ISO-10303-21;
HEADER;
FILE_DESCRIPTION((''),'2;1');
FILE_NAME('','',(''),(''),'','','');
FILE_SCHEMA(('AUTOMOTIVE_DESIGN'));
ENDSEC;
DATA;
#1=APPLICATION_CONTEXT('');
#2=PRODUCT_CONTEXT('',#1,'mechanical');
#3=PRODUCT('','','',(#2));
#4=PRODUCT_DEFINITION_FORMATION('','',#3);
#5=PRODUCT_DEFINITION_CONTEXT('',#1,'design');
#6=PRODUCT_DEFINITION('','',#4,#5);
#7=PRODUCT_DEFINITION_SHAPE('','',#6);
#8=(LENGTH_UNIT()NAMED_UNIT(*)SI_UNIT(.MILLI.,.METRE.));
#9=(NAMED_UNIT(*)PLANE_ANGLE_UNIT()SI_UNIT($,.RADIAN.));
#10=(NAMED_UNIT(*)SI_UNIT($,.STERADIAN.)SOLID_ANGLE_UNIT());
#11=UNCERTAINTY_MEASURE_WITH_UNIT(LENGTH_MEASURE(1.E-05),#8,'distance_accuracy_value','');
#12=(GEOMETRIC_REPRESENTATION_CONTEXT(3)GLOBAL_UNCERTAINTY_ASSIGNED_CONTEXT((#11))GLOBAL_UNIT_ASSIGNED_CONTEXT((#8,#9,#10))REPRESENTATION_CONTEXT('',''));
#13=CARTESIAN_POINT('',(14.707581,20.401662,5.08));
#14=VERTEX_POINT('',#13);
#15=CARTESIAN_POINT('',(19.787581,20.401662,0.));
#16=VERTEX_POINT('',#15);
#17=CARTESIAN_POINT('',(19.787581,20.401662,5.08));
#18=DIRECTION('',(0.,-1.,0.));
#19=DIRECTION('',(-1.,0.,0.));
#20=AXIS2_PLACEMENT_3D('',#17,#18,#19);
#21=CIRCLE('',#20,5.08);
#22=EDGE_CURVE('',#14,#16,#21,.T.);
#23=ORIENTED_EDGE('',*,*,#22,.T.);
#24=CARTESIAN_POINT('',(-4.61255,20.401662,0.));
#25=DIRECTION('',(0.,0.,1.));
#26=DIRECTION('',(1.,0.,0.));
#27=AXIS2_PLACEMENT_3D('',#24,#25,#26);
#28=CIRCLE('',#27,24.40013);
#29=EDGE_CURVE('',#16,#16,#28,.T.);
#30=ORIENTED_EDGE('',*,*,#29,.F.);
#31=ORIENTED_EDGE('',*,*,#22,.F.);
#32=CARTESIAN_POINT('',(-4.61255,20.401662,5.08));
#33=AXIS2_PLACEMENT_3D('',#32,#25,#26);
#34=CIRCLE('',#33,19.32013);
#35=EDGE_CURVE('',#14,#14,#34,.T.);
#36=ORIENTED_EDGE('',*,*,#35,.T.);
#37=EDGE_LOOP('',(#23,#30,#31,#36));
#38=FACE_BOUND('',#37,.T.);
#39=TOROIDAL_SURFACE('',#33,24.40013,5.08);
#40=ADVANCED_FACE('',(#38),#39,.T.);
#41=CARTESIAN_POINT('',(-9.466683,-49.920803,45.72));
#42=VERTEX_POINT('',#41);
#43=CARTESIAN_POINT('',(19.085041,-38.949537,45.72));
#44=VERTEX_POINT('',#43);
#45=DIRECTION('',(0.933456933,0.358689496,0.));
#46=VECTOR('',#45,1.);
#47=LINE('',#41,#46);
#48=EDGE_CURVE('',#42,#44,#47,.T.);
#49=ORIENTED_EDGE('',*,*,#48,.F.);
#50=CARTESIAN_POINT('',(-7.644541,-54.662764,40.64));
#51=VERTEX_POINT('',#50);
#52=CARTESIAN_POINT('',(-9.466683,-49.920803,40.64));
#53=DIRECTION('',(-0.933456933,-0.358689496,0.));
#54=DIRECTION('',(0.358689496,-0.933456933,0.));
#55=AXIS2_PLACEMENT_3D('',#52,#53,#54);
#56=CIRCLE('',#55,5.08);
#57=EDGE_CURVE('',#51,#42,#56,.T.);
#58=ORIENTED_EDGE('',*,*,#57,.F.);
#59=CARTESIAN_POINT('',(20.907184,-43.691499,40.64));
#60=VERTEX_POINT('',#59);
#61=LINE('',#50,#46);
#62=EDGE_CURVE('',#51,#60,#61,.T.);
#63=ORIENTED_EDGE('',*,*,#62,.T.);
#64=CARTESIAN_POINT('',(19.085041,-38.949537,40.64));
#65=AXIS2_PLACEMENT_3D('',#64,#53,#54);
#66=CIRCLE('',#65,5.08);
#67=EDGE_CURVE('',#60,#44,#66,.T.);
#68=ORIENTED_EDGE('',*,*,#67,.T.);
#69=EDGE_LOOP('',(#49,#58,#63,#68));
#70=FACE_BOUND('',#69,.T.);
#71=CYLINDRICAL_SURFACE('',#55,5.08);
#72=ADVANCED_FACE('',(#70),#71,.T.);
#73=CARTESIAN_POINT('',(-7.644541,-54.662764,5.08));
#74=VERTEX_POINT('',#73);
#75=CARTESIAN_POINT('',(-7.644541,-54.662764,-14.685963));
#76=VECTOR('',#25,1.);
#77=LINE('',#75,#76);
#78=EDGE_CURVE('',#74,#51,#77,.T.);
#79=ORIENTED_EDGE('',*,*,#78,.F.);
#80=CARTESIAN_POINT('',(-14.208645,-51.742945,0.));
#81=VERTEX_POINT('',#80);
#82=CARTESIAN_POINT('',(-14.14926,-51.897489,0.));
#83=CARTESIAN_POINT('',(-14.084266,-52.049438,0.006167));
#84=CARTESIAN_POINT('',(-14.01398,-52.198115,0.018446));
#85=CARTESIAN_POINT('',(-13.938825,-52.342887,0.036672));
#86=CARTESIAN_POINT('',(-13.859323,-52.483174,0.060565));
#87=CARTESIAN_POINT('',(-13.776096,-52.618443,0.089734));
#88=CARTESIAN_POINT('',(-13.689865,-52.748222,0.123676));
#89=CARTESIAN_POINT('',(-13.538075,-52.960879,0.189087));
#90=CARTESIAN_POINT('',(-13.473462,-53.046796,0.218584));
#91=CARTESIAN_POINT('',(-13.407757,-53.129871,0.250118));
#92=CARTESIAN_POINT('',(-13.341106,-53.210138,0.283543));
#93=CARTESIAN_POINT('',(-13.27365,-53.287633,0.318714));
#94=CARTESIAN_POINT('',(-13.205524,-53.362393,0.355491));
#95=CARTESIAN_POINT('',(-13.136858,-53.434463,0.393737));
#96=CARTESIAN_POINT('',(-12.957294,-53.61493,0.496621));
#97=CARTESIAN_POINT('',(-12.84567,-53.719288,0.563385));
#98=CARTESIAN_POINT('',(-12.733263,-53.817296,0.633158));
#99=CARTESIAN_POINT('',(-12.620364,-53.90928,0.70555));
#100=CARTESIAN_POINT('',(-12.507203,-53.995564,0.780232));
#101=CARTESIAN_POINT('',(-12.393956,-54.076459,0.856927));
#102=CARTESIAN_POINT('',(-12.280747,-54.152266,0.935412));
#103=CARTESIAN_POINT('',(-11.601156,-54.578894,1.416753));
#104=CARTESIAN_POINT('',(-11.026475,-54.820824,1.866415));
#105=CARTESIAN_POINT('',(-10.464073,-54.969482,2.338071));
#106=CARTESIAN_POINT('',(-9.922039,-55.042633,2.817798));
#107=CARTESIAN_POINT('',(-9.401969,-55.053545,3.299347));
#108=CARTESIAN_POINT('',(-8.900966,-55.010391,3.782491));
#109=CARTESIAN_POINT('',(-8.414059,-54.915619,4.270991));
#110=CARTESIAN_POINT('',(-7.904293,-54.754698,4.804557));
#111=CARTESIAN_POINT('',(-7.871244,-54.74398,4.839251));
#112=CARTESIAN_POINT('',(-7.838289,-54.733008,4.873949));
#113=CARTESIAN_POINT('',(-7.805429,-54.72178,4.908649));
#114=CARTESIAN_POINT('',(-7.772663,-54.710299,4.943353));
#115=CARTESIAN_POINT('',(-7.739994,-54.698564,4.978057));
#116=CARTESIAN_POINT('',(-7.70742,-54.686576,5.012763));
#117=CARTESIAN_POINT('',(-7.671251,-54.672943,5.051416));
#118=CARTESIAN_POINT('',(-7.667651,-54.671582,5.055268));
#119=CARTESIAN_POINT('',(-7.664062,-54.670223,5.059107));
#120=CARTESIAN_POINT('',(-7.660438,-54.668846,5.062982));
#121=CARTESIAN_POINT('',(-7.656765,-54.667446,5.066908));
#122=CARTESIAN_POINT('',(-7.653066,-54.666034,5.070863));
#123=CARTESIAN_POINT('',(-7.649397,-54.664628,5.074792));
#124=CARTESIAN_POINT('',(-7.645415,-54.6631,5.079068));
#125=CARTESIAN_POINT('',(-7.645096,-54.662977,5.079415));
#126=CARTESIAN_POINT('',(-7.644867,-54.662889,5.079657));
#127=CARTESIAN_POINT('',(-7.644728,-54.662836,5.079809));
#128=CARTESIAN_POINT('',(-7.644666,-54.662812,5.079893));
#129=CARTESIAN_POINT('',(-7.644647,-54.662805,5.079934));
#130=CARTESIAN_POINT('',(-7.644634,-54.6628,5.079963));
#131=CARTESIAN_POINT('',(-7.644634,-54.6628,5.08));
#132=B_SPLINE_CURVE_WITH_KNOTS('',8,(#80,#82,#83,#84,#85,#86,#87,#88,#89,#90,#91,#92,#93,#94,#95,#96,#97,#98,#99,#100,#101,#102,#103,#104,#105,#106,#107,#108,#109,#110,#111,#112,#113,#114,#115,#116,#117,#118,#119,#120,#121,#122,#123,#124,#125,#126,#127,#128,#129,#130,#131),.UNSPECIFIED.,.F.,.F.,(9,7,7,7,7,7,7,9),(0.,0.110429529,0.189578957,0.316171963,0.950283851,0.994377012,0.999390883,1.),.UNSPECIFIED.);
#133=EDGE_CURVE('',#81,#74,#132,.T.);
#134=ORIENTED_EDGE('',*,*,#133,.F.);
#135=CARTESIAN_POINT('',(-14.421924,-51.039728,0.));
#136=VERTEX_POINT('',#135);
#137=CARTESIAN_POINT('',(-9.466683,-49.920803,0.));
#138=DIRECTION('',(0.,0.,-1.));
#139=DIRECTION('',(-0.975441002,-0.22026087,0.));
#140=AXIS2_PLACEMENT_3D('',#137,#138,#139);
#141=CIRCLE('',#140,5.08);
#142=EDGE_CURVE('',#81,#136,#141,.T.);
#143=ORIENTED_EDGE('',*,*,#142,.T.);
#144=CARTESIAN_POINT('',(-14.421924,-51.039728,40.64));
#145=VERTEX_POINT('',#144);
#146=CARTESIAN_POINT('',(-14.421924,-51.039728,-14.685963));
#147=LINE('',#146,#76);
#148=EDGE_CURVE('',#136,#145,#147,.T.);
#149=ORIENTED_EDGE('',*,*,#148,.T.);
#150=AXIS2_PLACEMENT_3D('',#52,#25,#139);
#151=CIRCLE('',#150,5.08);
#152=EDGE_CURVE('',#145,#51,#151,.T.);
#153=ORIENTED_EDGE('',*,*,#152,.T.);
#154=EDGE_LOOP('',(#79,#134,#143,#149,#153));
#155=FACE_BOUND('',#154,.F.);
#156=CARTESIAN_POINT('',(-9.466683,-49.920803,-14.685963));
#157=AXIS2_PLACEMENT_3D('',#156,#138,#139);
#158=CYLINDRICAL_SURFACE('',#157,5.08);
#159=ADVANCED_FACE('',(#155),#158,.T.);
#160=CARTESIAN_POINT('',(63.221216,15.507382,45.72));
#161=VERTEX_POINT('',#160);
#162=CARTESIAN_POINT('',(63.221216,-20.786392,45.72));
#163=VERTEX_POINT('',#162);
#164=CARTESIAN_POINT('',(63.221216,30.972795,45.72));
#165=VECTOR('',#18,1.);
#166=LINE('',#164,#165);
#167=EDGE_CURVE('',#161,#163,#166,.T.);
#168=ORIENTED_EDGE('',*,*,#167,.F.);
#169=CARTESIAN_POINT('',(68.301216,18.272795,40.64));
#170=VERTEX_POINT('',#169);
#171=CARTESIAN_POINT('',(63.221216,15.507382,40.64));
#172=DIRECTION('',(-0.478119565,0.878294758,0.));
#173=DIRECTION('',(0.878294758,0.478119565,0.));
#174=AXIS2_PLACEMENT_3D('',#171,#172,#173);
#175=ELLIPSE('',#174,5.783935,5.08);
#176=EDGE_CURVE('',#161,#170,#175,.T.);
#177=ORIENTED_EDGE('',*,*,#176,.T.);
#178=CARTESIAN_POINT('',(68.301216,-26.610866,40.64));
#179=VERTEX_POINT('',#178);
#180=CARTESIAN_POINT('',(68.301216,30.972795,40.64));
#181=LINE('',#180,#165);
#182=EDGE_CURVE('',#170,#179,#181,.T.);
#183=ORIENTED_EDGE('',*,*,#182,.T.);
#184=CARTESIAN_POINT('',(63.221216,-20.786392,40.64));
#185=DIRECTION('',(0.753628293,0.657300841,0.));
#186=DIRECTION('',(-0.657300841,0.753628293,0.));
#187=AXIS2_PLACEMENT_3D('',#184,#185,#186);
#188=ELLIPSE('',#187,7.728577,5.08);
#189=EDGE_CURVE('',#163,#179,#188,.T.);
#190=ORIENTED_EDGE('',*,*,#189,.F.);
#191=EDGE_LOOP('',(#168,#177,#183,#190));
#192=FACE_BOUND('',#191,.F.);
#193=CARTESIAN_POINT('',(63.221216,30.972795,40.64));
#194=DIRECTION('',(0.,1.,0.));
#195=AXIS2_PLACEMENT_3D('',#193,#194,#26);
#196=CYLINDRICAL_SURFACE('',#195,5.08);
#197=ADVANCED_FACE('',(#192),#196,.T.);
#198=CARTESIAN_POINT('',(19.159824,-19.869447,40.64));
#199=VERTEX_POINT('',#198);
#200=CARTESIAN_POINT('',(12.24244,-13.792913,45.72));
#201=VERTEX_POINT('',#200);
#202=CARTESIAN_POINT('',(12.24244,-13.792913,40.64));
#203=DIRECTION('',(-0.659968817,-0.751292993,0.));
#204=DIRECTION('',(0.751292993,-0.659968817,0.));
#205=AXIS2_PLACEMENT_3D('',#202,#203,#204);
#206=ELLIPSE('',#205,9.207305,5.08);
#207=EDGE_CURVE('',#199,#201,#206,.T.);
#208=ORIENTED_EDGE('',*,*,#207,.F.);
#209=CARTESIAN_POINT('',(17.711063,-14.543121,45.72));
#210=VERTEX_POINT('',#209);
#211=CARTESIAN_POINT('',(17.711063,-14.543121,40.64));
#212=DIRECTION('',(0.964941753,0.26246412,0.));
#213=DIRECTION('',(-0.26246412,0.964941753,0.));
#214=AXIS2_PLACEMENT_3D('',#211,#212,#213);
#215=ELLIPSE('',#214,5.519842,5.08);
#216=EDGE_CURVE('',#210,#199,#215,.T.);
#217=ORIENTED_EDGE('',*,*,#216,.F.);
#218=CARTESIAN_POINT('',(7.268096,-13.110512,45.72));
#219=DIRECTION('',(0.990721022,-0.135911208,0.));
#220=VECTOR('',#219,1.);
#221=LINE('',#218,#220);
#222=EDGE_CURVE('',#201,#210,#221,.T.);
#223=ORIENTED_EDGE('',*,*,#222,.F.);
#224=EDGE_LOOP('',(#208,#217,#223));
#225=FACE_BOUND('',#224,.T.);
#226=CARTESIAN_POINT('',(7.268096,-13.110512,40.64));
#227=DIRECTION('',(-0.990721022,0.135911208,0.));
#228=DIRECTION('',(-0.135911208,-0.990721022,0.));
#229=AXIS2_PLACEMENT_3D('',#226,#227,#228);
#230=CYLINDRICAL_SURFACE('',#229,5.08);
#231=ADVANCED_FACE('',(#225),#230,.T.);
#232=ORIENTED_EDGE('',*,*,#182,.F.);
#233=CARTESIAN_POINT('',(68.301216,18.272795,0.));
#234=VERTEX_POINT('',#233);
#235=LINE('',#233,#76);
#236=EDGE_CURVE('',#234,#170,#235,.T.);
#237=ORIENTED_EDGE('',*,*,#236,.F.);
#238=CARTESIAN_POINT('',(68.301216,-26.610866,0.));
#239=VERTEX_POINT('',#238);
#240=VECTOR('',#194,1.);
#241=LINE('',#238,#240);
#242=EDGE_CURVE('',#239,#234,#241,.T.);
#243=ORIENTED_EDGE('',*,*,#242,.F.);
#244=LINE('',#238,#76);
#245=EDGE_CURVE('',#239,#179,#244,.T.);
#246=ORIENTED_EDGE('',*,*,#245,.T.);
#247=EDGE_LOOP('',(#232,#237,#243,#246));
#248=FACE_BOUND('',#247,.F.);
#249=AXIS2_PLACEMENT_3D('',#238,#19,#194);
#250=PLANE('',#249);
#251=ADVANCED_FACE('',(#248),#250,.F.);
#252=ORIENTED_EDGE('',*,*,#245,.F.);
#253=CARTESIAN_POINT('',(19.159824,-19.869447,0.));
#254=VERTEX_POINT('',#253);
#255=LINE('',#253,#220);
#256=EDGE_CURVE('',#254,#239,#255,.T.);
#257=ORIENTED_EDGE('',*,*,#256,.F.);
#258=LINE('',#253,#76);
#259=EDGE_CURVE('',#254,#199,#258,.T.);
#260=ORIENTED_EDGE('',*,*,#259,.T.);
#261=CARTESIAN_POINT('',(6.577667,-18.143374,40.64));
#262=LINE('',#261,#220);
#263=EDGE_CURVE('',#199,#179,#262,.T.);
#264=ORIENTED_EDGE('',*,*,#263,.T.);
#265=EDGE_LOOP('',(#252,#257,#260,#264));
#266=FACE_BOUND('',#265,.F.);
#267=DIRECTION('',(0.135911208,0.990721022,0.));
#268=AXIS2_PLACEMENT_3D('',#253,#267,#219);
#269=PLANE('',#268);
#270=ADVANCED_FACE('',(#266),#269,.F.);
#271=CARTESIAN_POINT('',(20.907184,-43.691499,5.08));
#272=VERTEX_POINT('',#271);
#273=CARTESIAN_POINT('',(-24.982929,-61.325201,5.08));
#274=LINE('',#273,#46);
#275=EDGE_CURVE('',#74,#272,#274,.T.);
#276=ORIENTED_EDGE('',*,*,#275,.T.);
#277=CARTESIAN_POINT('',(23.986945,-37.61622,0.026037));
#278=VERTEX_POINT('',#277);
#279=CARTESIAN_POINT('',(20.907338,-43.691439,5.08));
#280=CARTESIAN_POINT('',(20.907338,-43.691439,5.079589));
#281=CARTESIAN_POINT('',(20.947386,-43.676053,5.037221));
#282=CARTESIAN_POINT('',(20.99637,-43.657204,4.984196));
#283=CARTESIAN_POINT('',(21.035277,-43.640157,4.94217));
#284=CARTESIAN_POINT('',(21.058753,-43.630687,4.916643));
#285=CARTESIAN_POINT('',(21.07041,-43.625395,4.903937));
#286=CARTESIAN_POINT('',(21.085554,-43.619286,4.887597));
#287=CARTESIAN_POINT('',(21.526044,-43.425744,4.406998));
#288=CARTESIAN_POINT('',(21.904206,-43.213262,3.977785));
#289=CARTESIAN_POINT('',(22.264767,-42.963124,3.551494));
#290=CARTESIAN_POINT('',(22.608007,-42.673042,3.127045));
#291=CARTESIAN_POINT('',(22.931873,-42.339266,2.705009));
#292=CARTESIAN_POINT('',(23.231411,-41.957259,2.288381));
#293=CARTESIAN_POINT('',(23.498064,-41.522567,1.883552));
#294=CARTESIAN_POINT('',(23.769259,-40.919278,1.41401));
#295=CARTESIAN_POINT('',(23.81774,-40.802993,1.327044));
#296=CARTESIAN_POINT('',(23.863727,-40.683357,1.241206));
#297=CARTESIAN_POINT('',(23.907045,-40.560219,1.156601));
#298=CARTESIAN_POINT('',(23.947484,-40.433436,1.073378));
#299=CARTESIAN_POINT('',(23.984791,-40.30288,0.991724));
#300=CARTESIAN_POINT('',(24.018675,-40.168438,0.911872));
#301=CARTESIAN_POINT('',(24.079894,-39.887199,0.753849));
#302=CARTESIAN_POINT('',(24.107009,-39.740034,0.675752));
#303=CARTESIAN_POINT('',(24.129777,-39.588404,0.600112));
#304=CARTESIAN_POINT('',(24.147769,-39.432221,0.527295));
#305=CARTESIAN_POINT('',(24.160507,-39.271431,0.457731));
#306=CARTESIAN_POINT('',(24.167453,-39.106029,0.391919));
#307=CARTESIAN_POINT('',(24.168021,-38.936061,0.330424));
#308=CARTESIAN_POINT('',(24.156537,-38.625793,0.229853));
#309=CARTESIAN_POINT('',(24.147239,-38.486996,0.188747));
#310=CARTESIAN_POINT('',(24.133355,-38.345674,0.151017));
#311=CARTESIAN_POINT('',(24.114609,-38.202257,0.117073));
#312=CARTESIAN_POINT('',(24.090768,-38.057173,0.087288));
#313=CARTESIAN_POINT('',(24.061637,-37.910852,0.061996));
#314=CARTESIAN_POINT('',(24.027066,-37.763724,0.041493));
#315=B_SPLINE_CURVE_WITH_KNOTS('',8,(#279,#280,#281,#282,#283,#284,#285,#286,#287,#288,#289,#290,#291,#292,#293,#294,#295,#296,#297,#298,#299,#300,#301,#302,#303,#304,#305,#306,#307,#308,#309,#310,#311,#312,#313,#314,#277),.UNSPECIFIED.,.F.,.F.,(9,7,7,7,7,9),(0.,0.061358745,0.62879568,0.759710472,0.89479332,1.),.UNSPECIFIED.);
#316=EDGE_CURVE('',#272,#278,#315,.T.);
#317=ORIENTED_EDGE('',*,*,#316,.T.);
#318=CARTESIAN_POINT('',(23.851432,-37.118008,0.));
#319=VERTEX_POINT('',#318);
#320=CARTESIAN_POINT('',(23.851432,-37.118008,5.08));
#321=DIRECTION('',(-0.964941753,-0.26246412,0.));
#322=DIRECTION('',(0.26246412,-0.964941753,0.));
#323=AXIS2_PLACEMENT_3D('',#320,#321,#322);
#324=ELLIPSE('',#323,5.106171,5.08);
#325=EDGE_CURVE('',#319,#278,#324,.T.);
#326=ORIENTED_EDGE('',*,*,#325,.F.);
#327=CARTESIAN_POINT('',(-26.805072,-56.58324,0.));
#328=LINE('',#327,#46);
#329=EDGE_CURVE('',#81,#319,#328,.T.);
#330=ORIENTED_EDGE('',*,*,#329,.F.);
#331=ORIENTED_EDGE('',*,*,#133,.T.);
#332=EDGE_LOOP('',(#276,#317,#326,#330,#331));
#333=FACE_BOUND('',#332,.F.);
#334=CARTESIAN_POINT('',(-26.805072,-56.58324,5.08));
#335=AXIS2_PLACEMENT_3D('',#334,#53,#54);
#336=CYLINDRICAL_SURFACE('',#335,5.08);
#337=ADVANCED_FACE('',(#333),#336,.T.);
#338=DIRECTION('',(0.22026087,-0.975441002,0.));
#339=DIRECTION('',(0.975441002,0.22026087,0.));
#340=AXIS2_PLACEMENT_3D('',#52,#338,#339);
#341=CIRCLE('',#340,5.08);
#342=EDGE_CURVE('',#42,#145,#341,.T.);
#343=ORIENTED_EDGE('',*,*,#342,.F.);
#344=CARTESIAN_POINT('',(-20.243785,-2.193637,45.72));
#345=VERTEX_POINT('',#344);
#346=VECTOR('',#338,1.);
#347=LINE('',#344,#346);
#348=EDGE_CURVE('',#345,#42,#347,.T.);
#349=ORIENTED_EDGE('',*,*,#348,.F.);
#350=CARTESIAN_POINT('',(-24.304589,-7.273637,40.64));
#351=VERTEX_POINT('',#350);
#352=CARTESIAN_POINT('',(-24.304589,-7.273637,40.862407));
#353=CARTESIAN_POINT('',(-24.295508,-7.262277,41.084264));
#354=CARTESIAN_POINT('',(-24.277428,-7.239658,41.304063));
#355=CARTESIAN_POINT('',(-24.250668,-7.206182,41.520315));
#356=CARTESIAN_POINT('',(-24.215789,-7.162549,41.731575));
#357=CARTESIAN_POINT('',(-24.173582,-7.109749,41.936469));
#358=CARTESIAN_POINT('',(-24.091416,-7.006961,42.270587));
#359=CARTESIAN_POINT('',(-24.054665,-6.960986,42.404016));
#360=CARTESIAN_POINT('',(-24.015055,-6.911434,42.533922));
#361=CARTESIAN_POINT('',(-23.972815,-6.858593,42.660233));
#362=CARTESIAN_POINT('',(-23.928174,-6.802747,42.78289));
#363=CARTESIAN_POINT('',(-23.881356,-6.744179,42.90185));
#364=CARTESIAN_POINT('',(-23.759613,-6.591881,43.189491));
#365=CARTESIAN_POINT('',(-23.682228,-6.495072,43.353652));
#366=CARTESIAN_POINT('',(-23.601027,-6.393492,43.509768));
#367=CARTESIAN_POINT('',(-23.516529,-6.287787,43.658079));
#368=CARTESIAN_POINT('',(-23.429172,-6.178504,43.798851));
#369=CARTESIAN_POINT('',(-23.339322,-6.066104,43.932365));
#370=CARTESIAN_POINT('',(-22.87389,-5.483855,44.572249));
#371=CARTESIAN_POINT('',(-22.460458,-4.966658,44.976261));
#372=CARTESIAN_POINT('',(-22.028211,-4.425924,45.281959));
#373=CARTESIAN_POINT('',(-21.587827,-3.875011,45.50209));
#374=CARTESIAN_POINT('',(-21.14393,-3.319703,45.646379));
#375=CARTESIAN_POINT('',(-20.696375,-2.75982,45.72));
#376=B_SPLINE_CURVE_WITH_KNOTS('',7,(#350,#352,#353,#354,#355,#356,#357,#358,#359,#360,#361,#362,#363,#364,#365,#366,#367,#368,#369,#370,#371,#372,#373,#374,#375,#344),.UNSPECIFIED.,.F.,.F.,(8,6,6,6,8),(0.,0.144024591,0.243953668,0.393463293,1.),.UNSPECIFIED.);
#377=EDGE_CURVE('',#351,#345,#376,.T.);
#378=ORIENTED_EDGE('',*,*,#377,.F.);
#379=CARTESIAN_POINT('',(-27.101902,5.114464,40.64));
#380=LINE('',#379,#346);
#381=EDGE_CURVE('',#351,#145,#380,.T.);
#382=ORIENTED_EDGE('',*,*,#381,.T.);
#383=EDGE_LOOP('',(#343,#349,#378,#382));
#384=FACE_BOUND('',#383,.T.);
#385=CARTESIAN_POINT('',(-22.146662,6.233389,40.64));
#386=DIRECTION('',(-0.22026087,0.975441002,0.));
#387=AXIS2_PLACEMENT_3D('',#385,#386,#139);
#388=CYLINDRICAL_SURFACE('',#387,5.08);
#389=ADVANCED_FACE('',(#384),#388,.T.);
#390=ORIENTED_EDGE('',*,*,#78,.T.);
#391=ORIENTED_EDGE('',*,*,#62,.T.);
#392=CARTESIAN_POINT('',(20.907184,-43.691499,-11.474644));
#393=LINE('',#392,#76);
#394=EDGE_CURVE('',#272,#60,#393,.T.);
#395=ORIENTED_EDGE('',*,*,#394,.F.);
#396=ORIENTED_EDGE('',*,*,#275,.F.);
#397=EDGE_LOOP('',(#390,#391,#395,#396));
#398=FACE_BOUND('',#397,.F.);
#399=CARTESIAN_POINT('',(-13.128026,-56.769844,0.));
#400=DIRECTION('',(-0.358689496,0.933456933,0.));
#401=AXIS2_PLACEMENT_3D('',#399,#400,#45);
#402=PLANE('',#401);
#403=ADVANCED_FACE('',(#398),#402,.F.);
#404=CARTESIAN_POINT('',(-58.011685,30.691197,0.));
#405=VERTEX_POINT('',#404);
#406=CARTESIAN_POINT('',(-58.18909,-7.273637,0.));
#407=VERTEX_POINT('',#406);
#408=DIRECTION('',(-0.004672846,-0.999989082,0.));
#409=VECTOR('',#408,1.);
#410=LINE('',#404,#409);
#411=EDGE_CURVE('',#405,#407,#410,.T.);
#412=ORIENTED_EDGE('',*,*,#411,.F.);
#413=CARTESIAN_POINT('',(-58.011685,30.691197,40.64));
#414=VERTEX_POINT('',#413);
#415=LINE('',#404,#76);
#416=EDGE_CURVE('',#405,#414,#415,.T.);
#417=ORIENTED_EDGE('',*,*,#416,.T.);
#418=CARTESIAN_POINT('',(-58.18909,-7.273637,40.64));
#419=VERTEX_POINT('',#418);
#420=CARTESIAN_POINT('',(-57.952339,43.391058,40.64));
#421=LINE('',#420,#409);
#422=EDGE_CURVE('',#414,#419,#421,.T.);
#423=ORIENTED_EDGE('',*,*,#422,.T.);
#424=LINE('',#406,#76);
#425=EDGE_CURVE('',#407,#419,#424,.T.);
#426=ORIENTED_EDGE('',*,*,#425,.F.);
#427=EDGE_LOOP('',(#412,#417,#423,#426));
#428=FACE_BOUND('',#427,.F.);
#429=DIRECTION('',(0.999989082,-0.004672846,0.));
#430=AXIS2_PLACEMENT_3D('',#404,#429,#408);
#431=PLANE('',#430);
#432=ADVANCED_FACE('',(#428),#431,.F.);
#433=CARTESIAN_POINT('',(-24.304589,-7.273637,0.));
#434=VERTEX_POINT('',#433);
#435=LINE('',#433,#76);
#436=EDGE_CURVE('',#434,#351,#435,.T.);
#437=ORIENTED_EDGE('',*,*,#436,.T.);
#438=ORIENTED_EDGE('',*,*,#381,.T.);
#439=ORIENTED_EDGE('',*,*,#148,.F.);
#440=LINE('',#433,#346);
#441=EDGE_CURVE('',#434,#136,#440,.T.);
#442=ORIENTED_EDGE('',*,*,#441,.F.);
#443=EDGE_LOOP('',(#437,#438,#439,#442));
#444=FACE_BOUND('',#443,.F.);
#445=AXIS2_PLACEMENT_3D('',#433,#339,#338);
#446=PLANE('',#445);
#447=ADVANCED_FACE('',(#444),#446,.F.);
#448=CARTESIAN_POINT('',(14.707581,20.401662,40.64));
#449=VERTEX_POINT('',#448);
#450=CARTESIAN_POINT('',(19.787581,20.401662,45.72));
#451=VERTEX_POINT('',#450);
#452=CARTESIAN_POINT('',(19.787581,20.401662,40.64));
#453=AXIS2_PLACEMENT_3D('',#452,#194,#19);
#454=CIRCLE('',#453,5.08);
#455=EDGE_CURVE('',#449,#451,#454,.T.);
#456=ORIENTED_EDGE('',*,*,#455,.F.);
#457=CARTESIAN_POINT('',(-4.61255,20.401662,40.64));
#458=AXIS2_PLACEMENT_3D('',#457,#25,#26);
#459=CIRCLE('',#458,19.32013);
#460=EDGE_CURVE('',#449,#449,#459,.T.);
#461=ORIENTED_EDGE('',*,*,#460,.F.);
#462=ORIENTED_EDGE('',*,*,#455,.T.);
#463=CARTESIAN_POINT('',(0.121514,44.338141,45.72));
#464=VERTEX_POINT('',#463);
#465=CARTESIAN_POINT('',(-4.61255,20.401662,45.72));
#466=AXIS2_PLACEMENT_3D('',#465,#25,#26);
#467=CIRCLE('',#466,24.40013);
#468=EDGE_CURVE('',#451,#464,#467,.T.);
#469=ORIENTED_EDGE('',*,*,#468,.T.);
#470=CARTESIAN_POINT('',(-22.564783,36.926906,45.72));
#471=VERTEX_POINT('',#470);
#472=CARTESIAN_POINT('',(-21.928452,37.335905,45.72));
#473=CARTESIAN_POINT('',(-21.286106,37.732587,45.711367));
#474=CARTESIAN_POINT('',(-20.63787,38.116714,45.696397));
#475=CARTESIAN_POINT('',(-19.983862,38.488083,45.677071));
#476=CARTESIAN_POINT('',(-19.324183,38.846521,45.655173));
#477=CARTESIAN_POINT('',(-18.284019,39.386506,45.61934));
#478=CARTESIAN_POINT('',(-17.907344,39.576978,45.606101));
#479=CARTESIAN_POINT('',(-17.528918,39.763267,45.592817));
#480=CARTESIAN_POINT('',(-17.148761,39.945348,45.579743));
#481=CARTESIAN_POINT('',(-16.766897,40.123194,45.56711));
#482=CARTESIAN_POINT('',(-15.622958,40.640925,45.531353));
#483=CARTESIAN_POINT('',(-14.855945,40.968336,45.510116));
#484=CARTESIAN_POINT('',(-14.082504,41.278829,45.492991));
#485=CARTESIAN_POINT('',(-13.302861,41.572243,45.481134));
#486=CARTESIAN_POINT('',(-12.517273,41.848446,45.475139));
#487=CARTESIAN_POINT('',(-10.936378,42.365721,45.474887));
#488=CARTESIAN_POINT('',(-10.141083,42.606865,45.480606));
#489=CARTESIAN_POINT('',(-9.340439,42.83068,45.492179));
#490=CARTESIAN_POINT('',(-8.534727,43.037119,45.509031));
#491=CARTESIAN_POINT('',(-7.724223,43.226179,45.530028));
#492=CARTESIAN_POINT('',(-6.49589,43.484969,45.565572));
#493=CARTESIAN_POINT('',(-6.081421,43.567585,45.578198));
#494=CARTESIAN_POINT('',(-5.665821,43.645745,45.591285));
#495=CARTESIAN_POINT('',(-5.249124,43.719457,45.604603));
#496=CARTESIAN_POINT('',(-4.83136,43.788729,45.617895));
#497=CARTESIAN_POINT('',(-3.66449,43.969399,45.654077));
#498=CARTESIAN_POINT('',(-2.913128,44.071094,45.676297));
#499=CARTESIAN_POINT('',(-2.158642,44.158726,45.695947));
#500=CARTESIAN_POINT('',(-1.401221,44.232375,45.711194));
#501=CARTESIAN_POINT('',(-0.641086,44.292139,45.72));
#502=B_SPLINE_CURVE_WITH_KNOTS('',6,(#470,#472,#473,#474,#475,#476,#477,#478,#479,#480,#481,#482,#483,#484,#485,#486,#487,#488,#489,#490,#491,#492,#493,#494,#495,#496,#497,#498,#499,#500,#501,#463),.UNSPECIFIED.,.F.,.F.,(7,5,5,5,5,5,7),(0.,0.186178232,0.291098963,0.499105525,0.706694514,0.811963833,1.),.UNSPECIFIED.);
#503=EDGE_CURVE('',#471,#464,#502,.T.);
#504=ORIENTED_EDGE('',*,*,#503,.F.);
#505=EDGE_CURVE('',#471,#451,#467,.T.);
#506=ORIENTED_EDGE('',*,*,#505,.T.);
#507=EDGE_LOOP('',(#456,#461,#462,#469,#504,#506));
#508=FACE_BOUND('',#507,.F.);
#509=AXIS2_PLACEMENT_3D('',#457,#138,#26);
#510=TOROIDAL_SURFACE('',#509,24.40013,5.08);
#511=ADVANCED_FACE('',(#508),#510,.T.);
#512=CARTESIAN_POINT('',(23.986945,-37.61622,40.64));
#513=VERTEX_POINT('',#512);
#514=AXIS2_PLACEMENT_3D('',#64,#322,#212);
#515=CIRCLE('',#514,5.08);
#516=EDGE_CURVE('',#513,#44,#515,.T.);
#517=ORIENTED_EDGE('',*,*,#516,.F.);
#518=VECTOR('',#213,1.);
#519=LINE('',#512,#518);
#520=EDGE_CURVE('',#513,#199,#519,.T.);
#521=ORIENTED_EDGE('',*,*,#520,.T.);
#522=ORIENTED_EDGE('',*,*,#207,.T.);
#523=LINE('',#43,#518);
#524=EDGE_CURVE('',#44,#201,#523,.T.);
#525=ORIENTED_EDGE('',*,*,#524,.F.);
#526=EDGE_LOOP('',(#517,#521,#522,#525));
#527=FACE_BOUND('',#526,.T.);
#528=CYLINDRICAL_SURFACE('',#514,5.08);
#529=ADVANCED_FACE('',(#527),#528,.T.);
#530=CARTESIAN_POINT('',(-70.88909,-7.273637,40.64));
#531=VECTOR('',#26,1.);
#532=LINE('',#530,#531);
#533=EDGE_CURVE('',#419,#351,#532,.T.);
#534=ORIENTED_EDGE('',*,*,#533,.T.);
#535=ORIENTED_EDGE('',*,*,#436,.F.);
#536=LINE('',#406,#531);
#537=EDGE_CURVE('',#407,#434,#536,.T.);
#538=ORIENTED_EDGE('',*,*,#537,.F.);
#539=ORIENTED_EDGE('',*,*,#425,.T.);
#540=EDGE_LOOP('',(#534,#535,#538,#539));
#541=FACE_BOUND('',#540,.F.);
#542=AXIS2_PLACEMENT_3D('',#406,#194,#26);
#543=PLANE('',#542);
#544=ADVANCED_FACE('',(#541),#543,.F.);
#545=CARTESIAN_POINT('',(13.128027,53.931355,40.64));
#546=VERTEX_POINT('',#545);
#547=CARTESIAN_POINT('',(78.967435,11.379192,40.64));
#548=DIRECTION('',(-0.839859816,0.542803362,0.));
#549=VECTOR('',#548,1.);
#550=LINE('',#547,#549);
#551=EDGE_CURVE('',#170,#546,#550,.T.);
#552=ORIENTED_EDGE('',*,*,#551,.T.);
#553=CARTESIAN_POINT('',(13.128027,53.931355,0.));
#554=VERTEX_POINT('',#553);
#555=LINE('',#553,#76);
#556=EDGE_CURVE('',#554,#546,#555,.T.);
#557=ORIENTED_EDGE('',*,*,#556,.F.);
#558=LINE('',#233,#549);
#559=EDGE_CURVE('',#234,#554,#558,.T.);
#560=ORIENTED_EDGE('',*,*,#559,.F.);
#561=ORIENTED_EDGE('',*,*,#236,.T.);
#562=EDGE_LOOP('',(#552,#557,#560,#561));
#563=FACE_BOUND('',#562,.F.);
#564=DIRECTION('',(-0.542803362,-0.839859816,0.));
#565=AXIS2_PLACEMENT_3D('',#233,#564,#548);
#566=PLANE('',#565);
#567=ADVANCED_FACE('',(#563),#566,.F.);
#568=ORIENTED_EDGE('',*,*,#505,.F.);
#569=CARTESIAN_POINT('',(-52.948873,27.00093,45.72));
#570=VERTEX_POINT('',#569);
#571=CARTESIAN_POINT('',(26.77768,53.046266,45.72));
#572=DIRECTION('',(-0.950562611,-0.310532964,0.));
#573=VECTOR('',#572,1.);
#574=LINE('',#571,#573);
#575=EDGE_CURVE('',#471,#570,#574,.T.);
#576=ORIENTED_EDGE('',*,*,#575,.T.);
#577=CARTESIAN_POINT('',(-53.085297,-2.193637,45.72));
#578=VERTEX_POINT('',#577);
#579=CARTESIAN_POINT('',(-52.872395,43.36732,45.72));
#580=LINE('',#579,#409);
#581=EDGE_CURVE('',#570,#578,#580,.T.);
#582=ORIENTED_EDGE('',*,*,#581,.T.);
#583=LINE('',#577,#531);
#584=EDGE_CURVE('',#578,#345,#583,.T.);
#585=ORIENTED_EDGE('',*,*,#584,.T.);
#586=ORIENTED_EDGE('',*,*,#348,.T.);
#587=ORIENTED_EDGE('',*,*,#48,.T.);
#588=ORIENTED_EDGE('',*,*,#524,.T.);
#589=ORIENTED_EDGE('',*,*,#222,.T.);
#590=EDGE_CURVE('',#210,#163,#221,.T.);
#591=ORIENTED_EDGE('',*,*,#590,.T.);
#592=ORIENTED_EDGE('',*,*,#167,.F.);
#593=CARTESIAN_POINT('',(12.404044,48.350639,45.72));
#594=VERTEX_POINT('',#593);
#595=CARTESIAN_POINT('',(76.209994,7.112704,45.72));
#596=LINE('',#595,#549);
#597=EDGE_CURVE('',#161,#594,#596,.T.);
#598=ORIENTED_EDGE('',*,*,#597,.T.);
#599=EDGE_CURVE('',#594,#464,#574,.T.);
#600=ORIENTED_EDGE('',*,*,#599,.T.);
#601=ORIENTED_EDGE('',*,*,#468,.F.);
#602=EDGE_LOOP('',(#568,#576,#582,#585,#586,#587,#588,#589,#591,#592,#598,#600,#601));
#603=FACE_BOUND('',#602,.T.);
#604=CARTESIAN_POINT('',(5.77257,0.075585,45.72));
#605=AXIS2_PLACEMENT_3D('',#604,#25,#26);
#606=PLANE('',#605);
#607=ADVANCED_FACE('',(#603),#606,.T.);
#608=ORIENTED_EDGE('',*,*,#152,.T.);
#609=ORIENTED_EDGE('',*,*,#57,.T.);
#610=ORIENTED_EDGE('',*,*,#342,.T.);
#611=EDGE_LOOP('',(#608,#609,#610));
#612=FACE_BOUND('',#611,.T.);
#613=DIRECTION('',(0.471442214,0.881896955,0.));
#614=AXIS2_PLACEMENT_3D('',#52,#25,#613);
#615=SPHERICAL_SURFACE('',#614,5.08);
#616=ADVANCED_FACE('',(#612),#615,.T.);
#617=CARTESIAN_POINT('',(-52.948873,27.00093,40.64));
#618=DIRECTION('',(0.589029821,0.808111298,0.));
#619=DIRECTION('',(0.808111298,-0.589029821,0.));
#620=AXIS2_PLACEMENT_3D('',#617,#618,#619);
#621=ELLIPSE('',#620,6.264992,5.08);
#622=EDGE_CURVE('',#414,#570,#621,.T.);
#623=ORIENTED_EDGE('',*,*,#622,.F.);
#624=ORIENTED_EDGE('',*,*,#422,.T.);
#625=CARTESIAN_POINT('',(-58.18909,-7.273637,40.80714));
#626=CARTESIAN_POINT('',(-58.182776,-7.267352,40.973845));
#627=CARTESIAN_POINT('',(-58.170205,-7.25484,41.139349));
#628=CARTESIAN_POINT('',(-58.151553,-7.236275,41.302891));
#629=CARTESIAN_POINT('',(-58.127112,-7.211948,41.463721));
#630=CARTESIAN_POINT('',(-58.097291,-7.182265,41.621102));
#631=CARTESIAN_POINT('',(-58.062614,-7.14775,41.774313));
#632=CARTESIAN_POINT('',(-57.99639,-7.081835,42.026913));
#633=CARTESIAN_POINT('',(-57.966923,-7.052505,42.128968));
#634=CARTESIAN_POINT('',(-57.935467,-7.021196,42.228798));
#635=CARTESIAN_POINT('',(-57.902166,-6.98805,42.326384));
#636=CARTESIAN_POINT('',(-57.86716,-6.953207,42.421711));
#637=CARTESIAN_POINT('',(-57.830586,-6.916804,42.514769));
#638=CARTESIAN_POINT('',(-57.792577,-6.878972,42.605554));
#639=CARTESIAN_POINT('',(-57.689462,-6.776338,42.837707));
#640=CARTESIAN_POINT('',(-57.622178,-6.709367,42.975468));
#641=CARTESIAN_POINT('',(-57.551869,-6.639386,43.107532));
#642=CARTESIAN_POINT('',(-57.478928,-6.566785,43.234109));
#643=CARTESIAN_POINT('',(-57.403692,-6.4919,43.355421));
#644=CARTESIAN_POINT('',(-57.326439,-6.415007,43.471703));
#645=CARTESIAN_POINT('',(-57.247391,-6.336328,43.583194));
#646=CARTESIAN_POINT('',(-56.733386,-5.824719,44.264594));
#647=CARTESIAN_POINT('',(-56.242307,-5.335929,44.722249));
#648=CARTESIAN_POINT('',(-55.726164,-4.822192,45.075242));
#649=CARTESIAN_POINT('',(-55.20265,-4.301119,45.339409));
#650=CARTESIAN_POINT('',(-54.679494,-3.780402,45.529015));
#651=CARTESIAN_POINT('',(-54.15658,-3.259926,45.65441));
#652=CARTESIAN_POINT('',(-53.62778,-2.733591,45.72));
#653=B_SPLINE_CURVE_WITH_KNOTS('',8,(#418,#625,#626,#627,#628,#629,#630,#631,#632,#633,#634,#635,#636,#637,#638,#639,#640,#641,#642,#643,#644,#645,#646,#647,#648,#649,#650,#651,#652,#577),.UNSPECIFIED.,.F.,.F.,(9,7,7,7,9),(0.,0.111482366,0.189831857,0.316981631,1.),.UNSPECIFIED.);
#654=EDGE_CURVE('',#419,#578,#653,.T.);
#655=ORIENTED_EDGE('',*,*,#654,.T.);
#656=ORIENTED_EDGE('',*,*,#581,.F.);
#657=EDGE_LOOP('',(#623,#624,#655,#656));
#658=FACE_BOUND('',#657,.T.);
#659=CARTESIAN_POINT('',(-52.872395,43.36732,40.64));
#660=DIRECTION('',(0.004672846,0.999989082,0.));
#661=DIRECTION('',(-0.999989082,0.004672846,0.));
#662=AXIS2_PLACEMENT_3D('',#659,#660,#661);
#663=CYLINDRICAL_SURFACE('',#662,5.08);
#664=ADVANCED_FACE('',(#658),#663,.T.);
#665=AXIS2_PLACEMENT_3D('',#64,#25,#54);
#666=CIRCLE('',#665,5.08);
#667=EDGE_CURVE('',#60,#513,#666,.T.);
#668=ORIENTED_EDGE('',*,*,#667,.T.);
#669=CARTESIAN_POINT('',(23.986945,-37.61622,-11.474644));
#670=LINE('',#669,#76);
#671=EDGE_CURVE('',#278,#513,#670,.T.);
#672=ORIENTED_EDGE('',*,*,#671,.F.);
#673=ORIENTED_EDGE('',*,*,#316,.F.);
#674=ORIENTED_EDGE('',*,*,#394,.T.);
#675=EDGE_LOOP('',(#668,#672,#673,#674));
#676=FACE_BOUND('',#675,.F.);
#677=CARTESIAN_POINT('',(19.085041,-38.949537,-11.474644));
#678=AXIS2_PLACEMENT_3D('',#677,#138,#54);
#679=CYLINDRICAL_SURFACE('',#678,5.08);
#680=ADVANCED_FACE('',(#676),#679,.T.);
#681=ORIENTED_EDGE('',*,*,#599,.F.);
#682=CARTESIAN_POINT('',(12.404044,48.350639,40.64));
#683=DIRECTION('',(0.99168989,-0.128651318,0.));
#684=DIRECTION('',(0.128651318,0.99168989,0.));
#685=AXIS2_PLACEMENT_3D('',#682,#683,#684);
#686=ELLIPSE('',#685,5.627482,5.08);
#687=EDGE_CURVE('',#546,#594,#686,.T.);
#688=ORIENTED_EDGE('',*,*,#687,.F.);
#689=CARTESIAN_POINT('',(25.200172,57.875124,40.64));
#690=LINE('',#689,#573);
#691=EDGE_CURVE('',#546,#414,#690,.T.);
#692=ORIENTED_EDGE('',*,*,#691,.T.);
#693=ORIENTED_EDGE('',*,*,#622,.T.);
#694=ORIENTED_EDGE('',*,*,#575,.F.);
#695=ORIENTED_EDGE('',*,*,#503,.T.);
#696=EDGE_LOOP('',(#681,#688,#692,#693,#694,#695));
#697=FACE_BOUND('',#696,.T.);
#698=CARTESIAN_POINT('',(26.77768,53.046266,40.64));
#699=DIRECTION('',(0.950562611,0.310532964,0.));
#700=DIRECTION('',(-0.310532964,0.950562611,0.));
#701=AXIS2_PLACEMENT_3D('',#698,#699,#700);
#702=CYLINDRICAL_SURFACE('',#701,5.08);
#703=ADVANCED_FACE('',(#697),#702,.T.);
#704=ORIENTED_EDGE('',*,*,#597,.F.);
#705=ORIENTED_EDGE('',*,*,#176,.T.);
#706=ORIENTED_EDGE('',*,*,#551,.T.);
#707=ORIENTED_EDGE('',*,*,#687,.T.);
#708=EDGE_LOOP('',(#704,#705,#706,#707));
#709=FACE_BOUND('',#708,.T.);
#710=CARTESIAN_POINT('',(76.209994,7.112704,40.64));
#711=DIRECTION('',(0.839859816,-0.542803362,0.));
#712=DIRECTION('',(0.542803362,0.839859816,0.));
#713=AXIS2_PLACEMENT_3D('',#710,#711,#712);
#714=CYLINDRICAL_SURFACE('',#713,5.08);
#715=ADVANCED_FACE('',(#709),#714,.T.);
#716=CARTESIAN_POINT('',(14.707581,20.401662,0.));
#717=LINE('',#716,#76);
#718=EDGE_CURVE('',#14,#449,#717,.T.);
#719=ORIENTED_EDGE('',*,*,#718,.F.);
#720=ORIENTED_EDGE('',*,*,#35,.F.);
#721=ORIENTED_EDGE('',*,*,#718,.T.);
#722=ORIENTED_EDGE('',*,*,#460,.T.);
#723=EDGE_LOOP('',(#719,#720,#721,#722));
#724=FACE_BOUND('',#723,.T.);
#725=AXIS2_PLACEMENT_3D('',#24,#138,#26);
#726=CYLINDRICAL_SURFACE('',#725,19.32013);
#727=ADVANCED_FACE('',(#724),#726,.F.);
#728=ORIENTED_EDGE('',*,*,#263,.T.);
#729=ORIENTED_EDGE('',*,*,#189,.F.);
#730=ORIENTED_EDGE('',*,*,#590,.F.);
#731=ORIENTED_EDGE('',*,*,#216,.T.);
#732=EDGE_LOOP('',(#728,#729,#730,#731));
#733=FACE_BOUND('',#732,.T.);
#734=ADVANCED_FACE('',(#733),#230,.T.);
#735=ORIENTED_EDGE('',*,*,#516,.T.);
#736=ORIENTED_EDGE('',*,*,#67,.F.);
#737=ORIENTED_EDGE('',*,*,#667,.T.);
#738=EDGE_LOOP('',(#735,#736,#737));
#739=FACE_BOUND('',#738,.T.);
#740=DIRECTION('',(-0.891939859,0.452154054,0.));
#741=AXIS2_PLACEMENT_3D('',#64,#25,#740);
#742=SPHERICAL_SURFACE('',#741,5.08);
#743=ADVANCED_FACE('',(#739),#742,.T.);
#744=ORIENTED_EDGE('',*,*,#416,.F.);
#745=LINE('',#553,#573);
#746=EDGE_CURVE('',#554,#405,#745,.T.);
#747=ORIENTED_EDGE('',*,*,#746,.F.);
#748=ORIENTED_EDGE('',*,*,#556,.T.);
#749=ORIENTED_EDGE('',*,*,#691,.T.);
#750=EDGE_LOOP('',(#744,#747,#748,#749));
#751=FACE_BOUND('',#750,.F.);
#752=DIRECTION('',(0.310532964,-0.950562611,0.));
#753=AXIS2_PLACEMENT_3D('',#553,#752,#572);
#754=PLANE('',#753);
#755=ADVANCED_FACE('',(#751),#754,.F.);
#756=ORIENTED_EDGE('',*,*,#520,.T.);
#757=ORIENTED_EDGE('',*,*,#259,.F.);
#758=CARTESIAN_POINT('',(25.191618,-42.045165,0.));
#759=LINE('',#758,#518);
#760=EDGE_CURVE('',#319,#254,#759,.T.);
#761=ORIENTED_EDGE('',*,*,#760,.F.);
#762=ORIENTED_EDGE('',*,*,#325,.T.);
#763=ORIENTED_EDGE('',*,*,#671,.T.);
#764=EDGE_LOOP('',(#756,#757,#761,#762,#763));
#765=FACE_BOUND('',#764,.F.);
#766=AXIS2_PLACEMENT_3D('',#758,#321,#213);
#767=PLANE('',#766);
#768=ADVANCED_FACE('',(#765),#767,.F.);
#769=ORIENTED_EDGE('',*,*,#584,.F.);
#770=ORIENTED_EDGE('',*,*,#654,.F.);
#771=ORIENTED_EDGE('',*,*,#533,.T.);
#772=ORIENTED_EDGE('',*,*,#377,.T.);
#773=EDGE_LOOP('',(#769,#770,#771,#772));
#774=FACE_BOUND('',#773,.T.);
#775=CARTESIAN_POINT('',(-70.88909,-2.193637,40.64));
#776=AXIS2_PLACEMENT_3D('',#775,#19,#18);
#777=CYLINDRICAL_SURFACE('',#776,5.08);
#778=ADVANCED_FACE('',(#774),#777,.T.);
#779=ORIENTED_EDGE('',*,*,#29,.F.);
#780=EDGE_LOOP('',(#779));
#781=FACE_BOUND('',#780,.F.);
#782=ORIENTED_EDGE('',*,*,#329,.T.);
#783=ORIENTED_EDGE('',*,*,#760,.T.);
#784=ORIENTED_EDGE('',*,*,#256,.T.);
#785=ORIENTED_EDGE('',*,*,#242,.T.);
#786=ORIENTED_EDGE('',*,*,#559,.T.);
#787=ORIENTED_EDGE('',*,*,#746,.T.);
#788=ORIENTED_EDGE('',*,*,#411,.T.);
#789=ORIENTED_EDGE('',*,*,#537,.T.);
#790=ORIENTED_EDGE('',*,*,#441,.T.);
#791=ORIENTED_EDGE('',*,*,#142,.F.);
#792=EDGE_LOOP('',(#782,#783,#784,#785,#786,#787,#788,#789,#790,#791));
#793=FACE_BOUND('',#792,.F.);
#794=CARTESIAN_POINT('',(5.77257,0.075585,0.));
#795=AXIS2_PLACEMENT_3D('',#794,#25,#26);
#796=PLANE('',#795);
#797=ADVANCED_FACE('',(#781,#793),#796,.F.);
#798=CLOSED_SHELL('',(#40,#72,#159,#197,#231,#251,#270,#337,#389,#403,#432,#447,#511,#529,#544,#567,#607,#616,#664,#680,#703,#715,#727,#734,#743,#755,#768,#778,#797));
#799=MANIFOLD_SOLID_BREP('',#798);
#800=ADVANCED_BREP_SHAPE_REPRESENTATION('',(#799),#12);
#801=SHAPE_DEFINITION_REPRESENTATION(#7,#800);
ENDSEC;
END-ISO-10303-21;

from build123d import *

# Parameters (mm, degrees)
F0_R         = 19.3201303499
F1_DEPTH     = 45.72
F2_T1_DEPTH  = 55.325963316
F2_T3_DEPTH  = 52.1146440054
F2_T5_DEPTH  = 66.4513256331
F2_T7_DEPTH  = 30.5870827045
F2_T9_DEPTH  = 100.2395855595
F2_T11_DEPTH = 63.3652483976
F2_T13_DEPTH = 70.2836609721
F2_T15_DEPTH = 91.0933305156
F2_T20_DEPTH = 5.08
F2_T26_DEPTH = 5.08
F2_T36_DEPTH = 59.2845010847
F2_T41_DEPTH = 57.568004282
F2_T46_DEPTH = 31.0915483116
F2_T51_DEPTH = 75.0016446771
F2_T57_DEPTH = 59.2845010847
F2_T61_DEPTH = 57.568004282
F2_T68_DEPTH = 31.0915483116
F2_T72_DEPTH = 75.0016446771


# Not quite as in the source:
# - a fillet or chamfer that OpenCascade refuses, or shapes differently, is made with other operations: its cross-section is extruded or revolved along the edge and cut away or added


with BuildPart() as f1:
    # F0 (on Top) → F1 (new body)
    with BuildSketch(Plane.XY):
        Polygon((13.1280273199, 53.9313554764), (-58.0116845667, 30.691197142), (-58.1890903413, -7.2736367583), (-24.3045892566, -7.2736367583), (-13.1280263886, -56.7698441446), (25.1916181296, -42.0451648533), (19.1598236561, -19.8694467545), (68.3012157679, -26.610866189), (68.3012157679, 18.2727947831), align=None)
        with Locations((-4.6125496738, 20.4016622156)):
            Circle(F0_R, mode=Mode.SUBTRACT)
    extrude(amount=F1_DEPTH)

    # F2: fillet of radius 5.08 on 15 edges, made by hand

    # F2_s2 → F2_t1 (cut)
    with BuildSketch(Plane.XY.offset(-14.685963316)):
        with BuildLine():
            ThreePointArc((-14.4219236098, -51.039727833), (-11.8616097658, -54.4008391443), (-7.6445406789, -54.662763834))
            Line((-7.6445406789, -54.662763834), (-13.1280263886, -56.7698441446))
            Line((-13.1280263886, -56.7698441446), (-14.4219236098, -51.039727833))
        make_face()
    extrude(amount=F2_T1_DEPTH, mode=Mode.SUBTRACT)

    # F2_s4 → F2_t3 (cut)
    with BuildSketch(Plane.XY.offset(-11.4746440054)):
        with BuildLine():
            ThreePointArc((20.9071837297, -43.6914985622), (23.6160955732, -41.2464799373), (23.9869451943, -37.6162196147))
            Line((23.9869451943, -37.6162196147), (25.1916181296, -42.0451648533))
            Line((25.1916181296, -42.0451648533), (20.9071837297, -43.6914985622))
        make_face()
    extrude(amount=F2_T3_DEPTH, mode=Mode.SUBTRACT)

    # F2_s6 → F2_t5 (cut)
    with BuildSketch(Plane(origin=(-42.3016489373, -16.2548014713, 0), x_dir=(0, 0, 1), z_dir=(0.9334569329, 0.3586894958, 0))):
        with BuildLine():
            ThreePointArc((5.08, 48.2833194327), (1.4878975516, 46.7954218811), (0, 43.2033194327))
            Line((0, 43.2033194327), (0, 48.2833194327))
            Line((0, 48.2833194327), (5.08, 48.2833194327))
        make_face()
    extrude(amount=F2_T5_DEPTH, mode=Mode.SUBTRACT)

    # F2_s8 → F2_t7 (cut)
    with BuildSketch(Plane(origin=(-24.9632601794, -9.5923645646, 0), x_dir=(0, 0, 1), z_dir=(0.9334569329, 0.3586894958, 0))):
        with BuildLine():
            ThreePointArc((40.64, 48.2833194327), (44.2321024484, 46.7954218811), (45.72, 43.2033194327))
            Line((45.72, 43.2033194327), (45.72, 48.2833194327))
            Line((45.72, 48.2833194327), (40.64, 48.2833194327))
        make_face()
    extrude(amount=F2_T7_DEPTH, mode=Mode.SUBTRACT)

    # F2_s10 → F2_t9 (cut)
    with BuildSketch(Plane(origin=(39.8537401384, 13.0195527431, 0), x_dir=(0, 0, 1), z_dir=(-0.9505626114, -0.3105329641, 0))):
        with BuildLine():
            ThreePointArc((40.64, 47.1884448626), (44.2321024484, 45.700547311), (45.72, 42.1084448626))
            Line((45.72, 42.1084448626), (45.72, 47.1884448626))
            Line((45.72, 47.1884448626), (40.64, 47.1884448626))
        make_face()
    extrude(amount=F2_T9_DEPTH, mode=Mode.SUBTRACT)

    # F2_s12 → F2_t11 (cut)
    with BuildSketch(Plane(origin=(0.2014921201, 43.1193115962, 0), x_dir=(0, 0, 1), z_dir=(-0.0046728464, -0.9999890822, 0))):
        with BuildLine():
            ThreePointArc((40.64, 58.1544664567), (44.2321024484, 56.6665689051), (45.72, 53.0744664567))
            Line((45.72, 53.0744664567), (45.72, 58.1544664567))
            Line((45.72, 58.1544664567), (40.64, 58.1544664567))
        make_face()
    extrude(amount=F2_T11_DEPTH, mode=Mode.SUBTRACT)

    # F2_s14 → F2_t13 (cut)
    with BuildSketch(Plane.XZ.offset(-30.9727947831)):
        with BuildLine():
            ThreePointArc((68.3012157679, 40.64), (66.8133182163, 44.2321024484), (63.2212157679, 45.72))
            Line((63.2212157679, 45.72), (68.3012157679, 45.72))
            Line((68.3012157679, 45.72), (68.3012157679, 40.64))
        make_face()
    extrude(amount=F2_T13_DEPTH, mode=Mode.SUBTRACT)

    # F2_s16 → F2_t15 (cut)
    with BuildSketch(Plane(origin=(50.5132947185, -32.6468604807, 0), x_dir=(0, 0, 1), z_dir=(-0.8398598155, 0.5428033624, 0))):
        with BuildLine():
            ThreePointArc((40.64, 52.4207156327), (44.2321024484, 50.9328180811), (45.72, 47.3407156327))
            Line((45.72, 47.3407156327), (45.72, 52.4207156327))
            Line((45.72, 52.4207156327), (40.64, 52.4207156327))
        make_face()
    extrude(amount=F2_T15_DEPTH, mode=Mode.SUBTRACT)


with BuildPart() as f2_tool18:
    # F2_s19 → F2_t20 (new body)
    with BuildSketch(Plane.XY.offset(40.64)):
        Polygon((-9.4666833174, -49.9208026147), (-14.4219236098, -51.039727833), (-13.1280263886, -56.7698441446), (-7.6445406789, -54.662763834), align=None)
    extrude(amount=F2_T20_DEPTH)

    # F2_s21 → F2_t22 (revolve, cut)
    with BuildSketch(Plane(origin=(-9.4666833174, -49.9208026147, 40.64), x_dir=(0.4714422143, 0.8818969546, 0), z_dir=(0.8818969546, -0.4714422143, 0))):
        with BuildLine():
            ThreePointArc((0, -5.08), (5.08, 0), (0, 5.08))
            Line((0, 5.08), (0, -5.08))
        make_face()
    revolve(axis=Axis((-9.4666833174, -49.9208026147, 40.64), (0, 0, 1)), mode=Mode.SUBTRACT)


with BuildPart() as f1_1:
    add(f1.part)

    # F2_t17: cut F2_tool18
    add(f2_tool18.part, mode=Mode.SUBTRACT)


with BuildPart() as f2_tool24:
    # F2_s25 → F2_t26 (new body)
    with BuildSketch(Plane.XY.offset(40.64)):
        Polygon((19.0850410913, -38.9495373429), (20.9071837297, -43.6914985622), (25.1916181296, -42.0451648533), (23.9869451943, -37.6162196147), align=None)
    extrude(amount=F2_T26_DEPTH)

    # F2_s27 → F2_t28 (revolve, cut)
    with BuildSketch(Plane(origin=(19.0850410913, -38.9495373429, 40.64), x_dir=(-0.8919398586, 0.452154054, 0), z_dir=(0.452154054, 0.8919398586, 0))):
        with BuildLine():
            ThreePointArc((0, -5.08), (5.08, 0), (0, 5.08))
            Line((0, 5.08), (0, -5.08))
        make_face()
    revolve(axis=Axis((19.0850410913, -38.9495373429, 40.64), (0, 0, 1)), mode=Mode.SUBTRACT)


with BuildPart() as f1_2:
    add(f1_1.part)

    # F2_t23: cut F2_tool24
    add(f2_tool24.part, mode=Mode.SUBTRACT)

    # F2_s29 → F2_t30 (revolve, cut)
    with BuildSketch(Plane.XZ.offset(-20.4016622156)):
        with BuildLine():
            ThreePointArc((14.7075806761, 5.08), (16.1954782277, 1.4878975516), (19.7875806761, 0))
            Line((19.7875806761, 0), (14.7075806761, 0))
            Line((14.7075806761, 0), (14.7075806761, 5.08))
        make_face()
    revolve(axis=Axis((-4.6125496738, 20.4016622156, 0), (0, 0, 1)), mode=Mode.SUBTRACT)

    # F2_s31 → F2_t32 (revolve, cut)
    with BuildSketch(Plane.XZ.offset(-20.4016622156)):
        with BuildLine():
            ThreePointArc((14.7075806761, 40.64), (16.1954782277, 44.2321024484), (19.7875806761, 45.72))
            Line((19.7875806761, 45.72), (14.7075806761, 45.72))
            Line((14.7075806761, 45.72), (14.7075806761, 40.64))
        make_face()
    revolve(axis=Axis((-4.6125496738, 20.4016622156, 45.72), (0, 0, 1)), mode=Mode.SUBTRACT)


with BuildPart() as f2_tool34:
    # F2_s35 → F2_t36 (new body)
    with BuildSketch(Plane.YZ.offset(-70.8890903413)):
        with BuildLine():
            ThreePointArc((-7.2736367583, 40.64), (-5.7857392068, 44.2321024484), (-2.1936367583, 45.72))
            Line((-2.1936367583, 45.72), (-7.2736367583, 45.72))
            Line((-7.2736367583, 45.72), (-7.2736367583, 40.64))
        make_face()
    extrude(amount=F2_T36_DEPTH)

    split(bisect_by=Plane(origin=(-24.6882073851, -5.5747564614, 0), x_dir=(0, 0, 1), z_dir=(-0.9754410024, -0.2202608697, 0)), keep=Keep.TOP)


with BuildPart() as f1_3:
    add(f1_2.part)

    # F2_t33: cut F2_tool34
    add(f2_tool34.part, mode=Mode.SUBTRACT)


with BuildPart() as f2_tool39:
    # F2_s40 → F2_t41 (new body)
    with BuildSketch(Plane(origin=(-2.4136949173, 10.6892204341, 0), x_dir=(0, 0, 1), z_dir=(0.2202608697, -0.9754410024, 0))):
        with BuildLine():
            ThreePointArc((40.64, 25.3097904672), (44.2321024484, 23.8218929156), (45.72, 20.2297904672))
            Line((45.72, 20.2297904672), (45.72, 25.3097904672))
            Line((45.72, 25.3097904672), (40.64, 25.3097904672))
        make_face()
    extrude(amount=F2_T41_DEPTH)

    split(bisect_by=Plane.XZ.offset(7.2736367583), keep=Keep.TOP)


with BuildPart() as f1_4:
    add(f1_3.part)

    # F2_t38: cut F2_tool39
    add(f2_tool39.part, mode=Mode.SUBTRACT)


with BuildPart() as f2_tool44:
    # F2_s45 → F2_t46 (new body)
    with BuildSketch(Plane(origin=(11.1791797465, -41.0999313259, 0), x_dir=(0, 0, 1), z_dir=(-0.2624641197, 0.9649417526, 0))):
        with BuildLine():
            ThreePointArc((40.64, 13.2730969655), (44.2321024484, 11.7851994139), (45.72, 8.1930969655))
            Line((45.72, 8.1930969655), (45.72, 13.2730969655))
            Line((45.72, 13.2730969655), (40.64, 13.2730969655))
        make_face()
    extrude(amount=F2_T46_DEPTH)

    split(bisect_by=Plane(origin=(-2.3215052957, -16.9225491951, 0), x_dir=(0, 0, 1), z_dir=(-0.1359112078, -0.9907210221, 0)), keep=Keep.TOP)


with BuildPart() as f1_5:
    add(f1_4.part)

    # F2_t43: cut F2_tool44
    add(f2_tool44.part, mode=Mode.SUBTRACT)


with BuildPart() as f2_tool49:
    # F2_s50 → F2_t51 (new body)
    with BuildSketch(Plane(origin=(8.8991719713, -1.2208252209, 0), x_dir=(0, 0, 1), z_dir=(0.9907210221, -0.1359112078, 0))):
        with BuildLine():
            ThreePointArc((40.64, 17.0810438235), (44.2321024484, 15.5931462719), (45.72, 12.0010438235))
            Line((45.72, 12.0010438235), (45.72, 17.0810438235))
            Line((45.72, 17.0810438235), (40.64, 17.0810438235))
        make_face()
    extrude(amount=F2_T51_DEPTH)

    split(bisect_by=Plane(origin=(12.8077654479, 3.4837117113, 0), x_dir=(0, 0, 1), z_dir=(0.9649417526, 0.2624641197, 0)), keep=Keep.TOP)


with BuildPart() as f1_6:
    add(f1_5.part)

    # F2_t48: cut F2_tool49
    add(f2_tool49.part, mode=Mode.SUBTRACT)


with BuildPart() as f2_tool55:
    # F2_s56 → F2_t57 (new body)
    with BuildSketch(Plane.YZ.offset(-70.8890903413)):
        with BuildLine():
            ThreePointArc((-7.2736367583, 40.64), (-5.7857392068, 44.2321024484), (-2.1936367583, 45.72))
            Line((-2.1936367583, 45.72), (-7.2736367583, 45.72))
            Line((-7.2736367583, 45.72), (-7.2736367583, 40.64))
        make_face()
    extrude(amount=F2_T57_DEPTH)

    split(bisect_by=Plane(origin=(-24.6882073851, -5.5747564614, 0), x_dir=(0, 0, 1), z_dir=(0.9754410024, 0.2202608697, 0)), keep=Keep.TOP)


with BuildPart() as f2_tool59:
    # F2_s60 → F2_t61 (new body)
    with BuildSketch(Plane(origin=(-2.4136949173, 10.6892204341, 0), x_dir=(0, 0, 1), z_dir=(0.2202608697, -0.9754410024, 0))):
        with BuildLine():
            ThreePointArc((40.64, 25.3097904672), (44.2321024484, 23.8218929156), (45.72, 20.2297904672))
            Line((45.72, 20.2297904672), (45.72, 25.3097904672))
            Line((45.72, 25.3097904672), (40.64, 25.3097904672))
        make_face()
    extrude(amount=F2_T61_DEPTH)

    split(bisect_by=Plane.XZ.offset(7.2736367583), keep=Keep.BOTTOM)


with BuildPart() as f2_tool55_1:
    add(f2_tool55.part)

    # F2_t63: intersect F2_tool59
    add(f2_tool59.part, mode=Mode.INTERSECT)


with BuildPart() as f1_7:
    add(f1_6.part)

    # F2_t53: cut F2_tool55
    add(f2_tool55_1.part, mode=Mode.SUBTRACT)


with BuildPart() as f2_tool66:
    # F2_s67 → F2_t68 (new body)
    with BuildSketch(Plane(origin=(11.1791797465, -41.0999313259, 0), x_dir=(0, 0, 1), z_dir=(-0.2624641197, 0.9649417526, 0))):
        with BuildLine():
            ThreePointArc((40.64, 13.2730969655), (44.2321024484, 11.7851994139), (45.72, 8.1930969655))
            Line((45.72, 8.1930969655), (45.72, 13.2730969655))
            Line((45.72, 13.2730969655), (40.64, 13.2730969655))
        make_face()
    extrude(amount=F2_T68_DEPTH)

    split(bisect_by=Plane(origin=(-2.3215052957, -16.9225491951, 0), x_dir=(0, 0, 1), z_dir=(0.1359112078, 0.9907210221, 0)), keep=Keep.TOP)


with BuildPart() as f2_tool70:
    # F2_s71 → F2_t72 (new body)
    with BuildSketch(Plane(origin=(8.8991719713, -1.2208252209, 0), x_dir=(0, 0, 1), z_dir=(0.9907210221, -0.1359112078, 0))):
        with BuildLine():
            ThreePointArc((40.64, 17.0810438235), (44.2321024484, 15.5931462719), (45.72, 12.0010438235))
            Line((45.72, 12.0010438235), (45.72, 17.0810438235))
            Line((45.72, 17.0810438235), (40.64, 17.0810438235))
        make_face()
    extrude(amount=F2_T72_DEPTH)

    split(bisect_by=Plane(origin=(12.8077654479, 3.4837117113, 0), x_dir=(0, 0, 1), z_dir=(-0.9649417526, -0.2624641197, 0)), keep=Keep.TOP)


with BuildPart() as f2_tool66_1:
    add(f2_tool66.part)

    # F2_t74: intersect F2_tool70
    add(f2_tool70.part, mode=Mode.INTERSECT)


with BuildPart() as f1_8:
    add(f1_7.part)

    # F2_t64: cut F2_tool66
    add(f2_tool66_1.part, mode=Mode.SUBTRACT)


solid = f1_8.part
